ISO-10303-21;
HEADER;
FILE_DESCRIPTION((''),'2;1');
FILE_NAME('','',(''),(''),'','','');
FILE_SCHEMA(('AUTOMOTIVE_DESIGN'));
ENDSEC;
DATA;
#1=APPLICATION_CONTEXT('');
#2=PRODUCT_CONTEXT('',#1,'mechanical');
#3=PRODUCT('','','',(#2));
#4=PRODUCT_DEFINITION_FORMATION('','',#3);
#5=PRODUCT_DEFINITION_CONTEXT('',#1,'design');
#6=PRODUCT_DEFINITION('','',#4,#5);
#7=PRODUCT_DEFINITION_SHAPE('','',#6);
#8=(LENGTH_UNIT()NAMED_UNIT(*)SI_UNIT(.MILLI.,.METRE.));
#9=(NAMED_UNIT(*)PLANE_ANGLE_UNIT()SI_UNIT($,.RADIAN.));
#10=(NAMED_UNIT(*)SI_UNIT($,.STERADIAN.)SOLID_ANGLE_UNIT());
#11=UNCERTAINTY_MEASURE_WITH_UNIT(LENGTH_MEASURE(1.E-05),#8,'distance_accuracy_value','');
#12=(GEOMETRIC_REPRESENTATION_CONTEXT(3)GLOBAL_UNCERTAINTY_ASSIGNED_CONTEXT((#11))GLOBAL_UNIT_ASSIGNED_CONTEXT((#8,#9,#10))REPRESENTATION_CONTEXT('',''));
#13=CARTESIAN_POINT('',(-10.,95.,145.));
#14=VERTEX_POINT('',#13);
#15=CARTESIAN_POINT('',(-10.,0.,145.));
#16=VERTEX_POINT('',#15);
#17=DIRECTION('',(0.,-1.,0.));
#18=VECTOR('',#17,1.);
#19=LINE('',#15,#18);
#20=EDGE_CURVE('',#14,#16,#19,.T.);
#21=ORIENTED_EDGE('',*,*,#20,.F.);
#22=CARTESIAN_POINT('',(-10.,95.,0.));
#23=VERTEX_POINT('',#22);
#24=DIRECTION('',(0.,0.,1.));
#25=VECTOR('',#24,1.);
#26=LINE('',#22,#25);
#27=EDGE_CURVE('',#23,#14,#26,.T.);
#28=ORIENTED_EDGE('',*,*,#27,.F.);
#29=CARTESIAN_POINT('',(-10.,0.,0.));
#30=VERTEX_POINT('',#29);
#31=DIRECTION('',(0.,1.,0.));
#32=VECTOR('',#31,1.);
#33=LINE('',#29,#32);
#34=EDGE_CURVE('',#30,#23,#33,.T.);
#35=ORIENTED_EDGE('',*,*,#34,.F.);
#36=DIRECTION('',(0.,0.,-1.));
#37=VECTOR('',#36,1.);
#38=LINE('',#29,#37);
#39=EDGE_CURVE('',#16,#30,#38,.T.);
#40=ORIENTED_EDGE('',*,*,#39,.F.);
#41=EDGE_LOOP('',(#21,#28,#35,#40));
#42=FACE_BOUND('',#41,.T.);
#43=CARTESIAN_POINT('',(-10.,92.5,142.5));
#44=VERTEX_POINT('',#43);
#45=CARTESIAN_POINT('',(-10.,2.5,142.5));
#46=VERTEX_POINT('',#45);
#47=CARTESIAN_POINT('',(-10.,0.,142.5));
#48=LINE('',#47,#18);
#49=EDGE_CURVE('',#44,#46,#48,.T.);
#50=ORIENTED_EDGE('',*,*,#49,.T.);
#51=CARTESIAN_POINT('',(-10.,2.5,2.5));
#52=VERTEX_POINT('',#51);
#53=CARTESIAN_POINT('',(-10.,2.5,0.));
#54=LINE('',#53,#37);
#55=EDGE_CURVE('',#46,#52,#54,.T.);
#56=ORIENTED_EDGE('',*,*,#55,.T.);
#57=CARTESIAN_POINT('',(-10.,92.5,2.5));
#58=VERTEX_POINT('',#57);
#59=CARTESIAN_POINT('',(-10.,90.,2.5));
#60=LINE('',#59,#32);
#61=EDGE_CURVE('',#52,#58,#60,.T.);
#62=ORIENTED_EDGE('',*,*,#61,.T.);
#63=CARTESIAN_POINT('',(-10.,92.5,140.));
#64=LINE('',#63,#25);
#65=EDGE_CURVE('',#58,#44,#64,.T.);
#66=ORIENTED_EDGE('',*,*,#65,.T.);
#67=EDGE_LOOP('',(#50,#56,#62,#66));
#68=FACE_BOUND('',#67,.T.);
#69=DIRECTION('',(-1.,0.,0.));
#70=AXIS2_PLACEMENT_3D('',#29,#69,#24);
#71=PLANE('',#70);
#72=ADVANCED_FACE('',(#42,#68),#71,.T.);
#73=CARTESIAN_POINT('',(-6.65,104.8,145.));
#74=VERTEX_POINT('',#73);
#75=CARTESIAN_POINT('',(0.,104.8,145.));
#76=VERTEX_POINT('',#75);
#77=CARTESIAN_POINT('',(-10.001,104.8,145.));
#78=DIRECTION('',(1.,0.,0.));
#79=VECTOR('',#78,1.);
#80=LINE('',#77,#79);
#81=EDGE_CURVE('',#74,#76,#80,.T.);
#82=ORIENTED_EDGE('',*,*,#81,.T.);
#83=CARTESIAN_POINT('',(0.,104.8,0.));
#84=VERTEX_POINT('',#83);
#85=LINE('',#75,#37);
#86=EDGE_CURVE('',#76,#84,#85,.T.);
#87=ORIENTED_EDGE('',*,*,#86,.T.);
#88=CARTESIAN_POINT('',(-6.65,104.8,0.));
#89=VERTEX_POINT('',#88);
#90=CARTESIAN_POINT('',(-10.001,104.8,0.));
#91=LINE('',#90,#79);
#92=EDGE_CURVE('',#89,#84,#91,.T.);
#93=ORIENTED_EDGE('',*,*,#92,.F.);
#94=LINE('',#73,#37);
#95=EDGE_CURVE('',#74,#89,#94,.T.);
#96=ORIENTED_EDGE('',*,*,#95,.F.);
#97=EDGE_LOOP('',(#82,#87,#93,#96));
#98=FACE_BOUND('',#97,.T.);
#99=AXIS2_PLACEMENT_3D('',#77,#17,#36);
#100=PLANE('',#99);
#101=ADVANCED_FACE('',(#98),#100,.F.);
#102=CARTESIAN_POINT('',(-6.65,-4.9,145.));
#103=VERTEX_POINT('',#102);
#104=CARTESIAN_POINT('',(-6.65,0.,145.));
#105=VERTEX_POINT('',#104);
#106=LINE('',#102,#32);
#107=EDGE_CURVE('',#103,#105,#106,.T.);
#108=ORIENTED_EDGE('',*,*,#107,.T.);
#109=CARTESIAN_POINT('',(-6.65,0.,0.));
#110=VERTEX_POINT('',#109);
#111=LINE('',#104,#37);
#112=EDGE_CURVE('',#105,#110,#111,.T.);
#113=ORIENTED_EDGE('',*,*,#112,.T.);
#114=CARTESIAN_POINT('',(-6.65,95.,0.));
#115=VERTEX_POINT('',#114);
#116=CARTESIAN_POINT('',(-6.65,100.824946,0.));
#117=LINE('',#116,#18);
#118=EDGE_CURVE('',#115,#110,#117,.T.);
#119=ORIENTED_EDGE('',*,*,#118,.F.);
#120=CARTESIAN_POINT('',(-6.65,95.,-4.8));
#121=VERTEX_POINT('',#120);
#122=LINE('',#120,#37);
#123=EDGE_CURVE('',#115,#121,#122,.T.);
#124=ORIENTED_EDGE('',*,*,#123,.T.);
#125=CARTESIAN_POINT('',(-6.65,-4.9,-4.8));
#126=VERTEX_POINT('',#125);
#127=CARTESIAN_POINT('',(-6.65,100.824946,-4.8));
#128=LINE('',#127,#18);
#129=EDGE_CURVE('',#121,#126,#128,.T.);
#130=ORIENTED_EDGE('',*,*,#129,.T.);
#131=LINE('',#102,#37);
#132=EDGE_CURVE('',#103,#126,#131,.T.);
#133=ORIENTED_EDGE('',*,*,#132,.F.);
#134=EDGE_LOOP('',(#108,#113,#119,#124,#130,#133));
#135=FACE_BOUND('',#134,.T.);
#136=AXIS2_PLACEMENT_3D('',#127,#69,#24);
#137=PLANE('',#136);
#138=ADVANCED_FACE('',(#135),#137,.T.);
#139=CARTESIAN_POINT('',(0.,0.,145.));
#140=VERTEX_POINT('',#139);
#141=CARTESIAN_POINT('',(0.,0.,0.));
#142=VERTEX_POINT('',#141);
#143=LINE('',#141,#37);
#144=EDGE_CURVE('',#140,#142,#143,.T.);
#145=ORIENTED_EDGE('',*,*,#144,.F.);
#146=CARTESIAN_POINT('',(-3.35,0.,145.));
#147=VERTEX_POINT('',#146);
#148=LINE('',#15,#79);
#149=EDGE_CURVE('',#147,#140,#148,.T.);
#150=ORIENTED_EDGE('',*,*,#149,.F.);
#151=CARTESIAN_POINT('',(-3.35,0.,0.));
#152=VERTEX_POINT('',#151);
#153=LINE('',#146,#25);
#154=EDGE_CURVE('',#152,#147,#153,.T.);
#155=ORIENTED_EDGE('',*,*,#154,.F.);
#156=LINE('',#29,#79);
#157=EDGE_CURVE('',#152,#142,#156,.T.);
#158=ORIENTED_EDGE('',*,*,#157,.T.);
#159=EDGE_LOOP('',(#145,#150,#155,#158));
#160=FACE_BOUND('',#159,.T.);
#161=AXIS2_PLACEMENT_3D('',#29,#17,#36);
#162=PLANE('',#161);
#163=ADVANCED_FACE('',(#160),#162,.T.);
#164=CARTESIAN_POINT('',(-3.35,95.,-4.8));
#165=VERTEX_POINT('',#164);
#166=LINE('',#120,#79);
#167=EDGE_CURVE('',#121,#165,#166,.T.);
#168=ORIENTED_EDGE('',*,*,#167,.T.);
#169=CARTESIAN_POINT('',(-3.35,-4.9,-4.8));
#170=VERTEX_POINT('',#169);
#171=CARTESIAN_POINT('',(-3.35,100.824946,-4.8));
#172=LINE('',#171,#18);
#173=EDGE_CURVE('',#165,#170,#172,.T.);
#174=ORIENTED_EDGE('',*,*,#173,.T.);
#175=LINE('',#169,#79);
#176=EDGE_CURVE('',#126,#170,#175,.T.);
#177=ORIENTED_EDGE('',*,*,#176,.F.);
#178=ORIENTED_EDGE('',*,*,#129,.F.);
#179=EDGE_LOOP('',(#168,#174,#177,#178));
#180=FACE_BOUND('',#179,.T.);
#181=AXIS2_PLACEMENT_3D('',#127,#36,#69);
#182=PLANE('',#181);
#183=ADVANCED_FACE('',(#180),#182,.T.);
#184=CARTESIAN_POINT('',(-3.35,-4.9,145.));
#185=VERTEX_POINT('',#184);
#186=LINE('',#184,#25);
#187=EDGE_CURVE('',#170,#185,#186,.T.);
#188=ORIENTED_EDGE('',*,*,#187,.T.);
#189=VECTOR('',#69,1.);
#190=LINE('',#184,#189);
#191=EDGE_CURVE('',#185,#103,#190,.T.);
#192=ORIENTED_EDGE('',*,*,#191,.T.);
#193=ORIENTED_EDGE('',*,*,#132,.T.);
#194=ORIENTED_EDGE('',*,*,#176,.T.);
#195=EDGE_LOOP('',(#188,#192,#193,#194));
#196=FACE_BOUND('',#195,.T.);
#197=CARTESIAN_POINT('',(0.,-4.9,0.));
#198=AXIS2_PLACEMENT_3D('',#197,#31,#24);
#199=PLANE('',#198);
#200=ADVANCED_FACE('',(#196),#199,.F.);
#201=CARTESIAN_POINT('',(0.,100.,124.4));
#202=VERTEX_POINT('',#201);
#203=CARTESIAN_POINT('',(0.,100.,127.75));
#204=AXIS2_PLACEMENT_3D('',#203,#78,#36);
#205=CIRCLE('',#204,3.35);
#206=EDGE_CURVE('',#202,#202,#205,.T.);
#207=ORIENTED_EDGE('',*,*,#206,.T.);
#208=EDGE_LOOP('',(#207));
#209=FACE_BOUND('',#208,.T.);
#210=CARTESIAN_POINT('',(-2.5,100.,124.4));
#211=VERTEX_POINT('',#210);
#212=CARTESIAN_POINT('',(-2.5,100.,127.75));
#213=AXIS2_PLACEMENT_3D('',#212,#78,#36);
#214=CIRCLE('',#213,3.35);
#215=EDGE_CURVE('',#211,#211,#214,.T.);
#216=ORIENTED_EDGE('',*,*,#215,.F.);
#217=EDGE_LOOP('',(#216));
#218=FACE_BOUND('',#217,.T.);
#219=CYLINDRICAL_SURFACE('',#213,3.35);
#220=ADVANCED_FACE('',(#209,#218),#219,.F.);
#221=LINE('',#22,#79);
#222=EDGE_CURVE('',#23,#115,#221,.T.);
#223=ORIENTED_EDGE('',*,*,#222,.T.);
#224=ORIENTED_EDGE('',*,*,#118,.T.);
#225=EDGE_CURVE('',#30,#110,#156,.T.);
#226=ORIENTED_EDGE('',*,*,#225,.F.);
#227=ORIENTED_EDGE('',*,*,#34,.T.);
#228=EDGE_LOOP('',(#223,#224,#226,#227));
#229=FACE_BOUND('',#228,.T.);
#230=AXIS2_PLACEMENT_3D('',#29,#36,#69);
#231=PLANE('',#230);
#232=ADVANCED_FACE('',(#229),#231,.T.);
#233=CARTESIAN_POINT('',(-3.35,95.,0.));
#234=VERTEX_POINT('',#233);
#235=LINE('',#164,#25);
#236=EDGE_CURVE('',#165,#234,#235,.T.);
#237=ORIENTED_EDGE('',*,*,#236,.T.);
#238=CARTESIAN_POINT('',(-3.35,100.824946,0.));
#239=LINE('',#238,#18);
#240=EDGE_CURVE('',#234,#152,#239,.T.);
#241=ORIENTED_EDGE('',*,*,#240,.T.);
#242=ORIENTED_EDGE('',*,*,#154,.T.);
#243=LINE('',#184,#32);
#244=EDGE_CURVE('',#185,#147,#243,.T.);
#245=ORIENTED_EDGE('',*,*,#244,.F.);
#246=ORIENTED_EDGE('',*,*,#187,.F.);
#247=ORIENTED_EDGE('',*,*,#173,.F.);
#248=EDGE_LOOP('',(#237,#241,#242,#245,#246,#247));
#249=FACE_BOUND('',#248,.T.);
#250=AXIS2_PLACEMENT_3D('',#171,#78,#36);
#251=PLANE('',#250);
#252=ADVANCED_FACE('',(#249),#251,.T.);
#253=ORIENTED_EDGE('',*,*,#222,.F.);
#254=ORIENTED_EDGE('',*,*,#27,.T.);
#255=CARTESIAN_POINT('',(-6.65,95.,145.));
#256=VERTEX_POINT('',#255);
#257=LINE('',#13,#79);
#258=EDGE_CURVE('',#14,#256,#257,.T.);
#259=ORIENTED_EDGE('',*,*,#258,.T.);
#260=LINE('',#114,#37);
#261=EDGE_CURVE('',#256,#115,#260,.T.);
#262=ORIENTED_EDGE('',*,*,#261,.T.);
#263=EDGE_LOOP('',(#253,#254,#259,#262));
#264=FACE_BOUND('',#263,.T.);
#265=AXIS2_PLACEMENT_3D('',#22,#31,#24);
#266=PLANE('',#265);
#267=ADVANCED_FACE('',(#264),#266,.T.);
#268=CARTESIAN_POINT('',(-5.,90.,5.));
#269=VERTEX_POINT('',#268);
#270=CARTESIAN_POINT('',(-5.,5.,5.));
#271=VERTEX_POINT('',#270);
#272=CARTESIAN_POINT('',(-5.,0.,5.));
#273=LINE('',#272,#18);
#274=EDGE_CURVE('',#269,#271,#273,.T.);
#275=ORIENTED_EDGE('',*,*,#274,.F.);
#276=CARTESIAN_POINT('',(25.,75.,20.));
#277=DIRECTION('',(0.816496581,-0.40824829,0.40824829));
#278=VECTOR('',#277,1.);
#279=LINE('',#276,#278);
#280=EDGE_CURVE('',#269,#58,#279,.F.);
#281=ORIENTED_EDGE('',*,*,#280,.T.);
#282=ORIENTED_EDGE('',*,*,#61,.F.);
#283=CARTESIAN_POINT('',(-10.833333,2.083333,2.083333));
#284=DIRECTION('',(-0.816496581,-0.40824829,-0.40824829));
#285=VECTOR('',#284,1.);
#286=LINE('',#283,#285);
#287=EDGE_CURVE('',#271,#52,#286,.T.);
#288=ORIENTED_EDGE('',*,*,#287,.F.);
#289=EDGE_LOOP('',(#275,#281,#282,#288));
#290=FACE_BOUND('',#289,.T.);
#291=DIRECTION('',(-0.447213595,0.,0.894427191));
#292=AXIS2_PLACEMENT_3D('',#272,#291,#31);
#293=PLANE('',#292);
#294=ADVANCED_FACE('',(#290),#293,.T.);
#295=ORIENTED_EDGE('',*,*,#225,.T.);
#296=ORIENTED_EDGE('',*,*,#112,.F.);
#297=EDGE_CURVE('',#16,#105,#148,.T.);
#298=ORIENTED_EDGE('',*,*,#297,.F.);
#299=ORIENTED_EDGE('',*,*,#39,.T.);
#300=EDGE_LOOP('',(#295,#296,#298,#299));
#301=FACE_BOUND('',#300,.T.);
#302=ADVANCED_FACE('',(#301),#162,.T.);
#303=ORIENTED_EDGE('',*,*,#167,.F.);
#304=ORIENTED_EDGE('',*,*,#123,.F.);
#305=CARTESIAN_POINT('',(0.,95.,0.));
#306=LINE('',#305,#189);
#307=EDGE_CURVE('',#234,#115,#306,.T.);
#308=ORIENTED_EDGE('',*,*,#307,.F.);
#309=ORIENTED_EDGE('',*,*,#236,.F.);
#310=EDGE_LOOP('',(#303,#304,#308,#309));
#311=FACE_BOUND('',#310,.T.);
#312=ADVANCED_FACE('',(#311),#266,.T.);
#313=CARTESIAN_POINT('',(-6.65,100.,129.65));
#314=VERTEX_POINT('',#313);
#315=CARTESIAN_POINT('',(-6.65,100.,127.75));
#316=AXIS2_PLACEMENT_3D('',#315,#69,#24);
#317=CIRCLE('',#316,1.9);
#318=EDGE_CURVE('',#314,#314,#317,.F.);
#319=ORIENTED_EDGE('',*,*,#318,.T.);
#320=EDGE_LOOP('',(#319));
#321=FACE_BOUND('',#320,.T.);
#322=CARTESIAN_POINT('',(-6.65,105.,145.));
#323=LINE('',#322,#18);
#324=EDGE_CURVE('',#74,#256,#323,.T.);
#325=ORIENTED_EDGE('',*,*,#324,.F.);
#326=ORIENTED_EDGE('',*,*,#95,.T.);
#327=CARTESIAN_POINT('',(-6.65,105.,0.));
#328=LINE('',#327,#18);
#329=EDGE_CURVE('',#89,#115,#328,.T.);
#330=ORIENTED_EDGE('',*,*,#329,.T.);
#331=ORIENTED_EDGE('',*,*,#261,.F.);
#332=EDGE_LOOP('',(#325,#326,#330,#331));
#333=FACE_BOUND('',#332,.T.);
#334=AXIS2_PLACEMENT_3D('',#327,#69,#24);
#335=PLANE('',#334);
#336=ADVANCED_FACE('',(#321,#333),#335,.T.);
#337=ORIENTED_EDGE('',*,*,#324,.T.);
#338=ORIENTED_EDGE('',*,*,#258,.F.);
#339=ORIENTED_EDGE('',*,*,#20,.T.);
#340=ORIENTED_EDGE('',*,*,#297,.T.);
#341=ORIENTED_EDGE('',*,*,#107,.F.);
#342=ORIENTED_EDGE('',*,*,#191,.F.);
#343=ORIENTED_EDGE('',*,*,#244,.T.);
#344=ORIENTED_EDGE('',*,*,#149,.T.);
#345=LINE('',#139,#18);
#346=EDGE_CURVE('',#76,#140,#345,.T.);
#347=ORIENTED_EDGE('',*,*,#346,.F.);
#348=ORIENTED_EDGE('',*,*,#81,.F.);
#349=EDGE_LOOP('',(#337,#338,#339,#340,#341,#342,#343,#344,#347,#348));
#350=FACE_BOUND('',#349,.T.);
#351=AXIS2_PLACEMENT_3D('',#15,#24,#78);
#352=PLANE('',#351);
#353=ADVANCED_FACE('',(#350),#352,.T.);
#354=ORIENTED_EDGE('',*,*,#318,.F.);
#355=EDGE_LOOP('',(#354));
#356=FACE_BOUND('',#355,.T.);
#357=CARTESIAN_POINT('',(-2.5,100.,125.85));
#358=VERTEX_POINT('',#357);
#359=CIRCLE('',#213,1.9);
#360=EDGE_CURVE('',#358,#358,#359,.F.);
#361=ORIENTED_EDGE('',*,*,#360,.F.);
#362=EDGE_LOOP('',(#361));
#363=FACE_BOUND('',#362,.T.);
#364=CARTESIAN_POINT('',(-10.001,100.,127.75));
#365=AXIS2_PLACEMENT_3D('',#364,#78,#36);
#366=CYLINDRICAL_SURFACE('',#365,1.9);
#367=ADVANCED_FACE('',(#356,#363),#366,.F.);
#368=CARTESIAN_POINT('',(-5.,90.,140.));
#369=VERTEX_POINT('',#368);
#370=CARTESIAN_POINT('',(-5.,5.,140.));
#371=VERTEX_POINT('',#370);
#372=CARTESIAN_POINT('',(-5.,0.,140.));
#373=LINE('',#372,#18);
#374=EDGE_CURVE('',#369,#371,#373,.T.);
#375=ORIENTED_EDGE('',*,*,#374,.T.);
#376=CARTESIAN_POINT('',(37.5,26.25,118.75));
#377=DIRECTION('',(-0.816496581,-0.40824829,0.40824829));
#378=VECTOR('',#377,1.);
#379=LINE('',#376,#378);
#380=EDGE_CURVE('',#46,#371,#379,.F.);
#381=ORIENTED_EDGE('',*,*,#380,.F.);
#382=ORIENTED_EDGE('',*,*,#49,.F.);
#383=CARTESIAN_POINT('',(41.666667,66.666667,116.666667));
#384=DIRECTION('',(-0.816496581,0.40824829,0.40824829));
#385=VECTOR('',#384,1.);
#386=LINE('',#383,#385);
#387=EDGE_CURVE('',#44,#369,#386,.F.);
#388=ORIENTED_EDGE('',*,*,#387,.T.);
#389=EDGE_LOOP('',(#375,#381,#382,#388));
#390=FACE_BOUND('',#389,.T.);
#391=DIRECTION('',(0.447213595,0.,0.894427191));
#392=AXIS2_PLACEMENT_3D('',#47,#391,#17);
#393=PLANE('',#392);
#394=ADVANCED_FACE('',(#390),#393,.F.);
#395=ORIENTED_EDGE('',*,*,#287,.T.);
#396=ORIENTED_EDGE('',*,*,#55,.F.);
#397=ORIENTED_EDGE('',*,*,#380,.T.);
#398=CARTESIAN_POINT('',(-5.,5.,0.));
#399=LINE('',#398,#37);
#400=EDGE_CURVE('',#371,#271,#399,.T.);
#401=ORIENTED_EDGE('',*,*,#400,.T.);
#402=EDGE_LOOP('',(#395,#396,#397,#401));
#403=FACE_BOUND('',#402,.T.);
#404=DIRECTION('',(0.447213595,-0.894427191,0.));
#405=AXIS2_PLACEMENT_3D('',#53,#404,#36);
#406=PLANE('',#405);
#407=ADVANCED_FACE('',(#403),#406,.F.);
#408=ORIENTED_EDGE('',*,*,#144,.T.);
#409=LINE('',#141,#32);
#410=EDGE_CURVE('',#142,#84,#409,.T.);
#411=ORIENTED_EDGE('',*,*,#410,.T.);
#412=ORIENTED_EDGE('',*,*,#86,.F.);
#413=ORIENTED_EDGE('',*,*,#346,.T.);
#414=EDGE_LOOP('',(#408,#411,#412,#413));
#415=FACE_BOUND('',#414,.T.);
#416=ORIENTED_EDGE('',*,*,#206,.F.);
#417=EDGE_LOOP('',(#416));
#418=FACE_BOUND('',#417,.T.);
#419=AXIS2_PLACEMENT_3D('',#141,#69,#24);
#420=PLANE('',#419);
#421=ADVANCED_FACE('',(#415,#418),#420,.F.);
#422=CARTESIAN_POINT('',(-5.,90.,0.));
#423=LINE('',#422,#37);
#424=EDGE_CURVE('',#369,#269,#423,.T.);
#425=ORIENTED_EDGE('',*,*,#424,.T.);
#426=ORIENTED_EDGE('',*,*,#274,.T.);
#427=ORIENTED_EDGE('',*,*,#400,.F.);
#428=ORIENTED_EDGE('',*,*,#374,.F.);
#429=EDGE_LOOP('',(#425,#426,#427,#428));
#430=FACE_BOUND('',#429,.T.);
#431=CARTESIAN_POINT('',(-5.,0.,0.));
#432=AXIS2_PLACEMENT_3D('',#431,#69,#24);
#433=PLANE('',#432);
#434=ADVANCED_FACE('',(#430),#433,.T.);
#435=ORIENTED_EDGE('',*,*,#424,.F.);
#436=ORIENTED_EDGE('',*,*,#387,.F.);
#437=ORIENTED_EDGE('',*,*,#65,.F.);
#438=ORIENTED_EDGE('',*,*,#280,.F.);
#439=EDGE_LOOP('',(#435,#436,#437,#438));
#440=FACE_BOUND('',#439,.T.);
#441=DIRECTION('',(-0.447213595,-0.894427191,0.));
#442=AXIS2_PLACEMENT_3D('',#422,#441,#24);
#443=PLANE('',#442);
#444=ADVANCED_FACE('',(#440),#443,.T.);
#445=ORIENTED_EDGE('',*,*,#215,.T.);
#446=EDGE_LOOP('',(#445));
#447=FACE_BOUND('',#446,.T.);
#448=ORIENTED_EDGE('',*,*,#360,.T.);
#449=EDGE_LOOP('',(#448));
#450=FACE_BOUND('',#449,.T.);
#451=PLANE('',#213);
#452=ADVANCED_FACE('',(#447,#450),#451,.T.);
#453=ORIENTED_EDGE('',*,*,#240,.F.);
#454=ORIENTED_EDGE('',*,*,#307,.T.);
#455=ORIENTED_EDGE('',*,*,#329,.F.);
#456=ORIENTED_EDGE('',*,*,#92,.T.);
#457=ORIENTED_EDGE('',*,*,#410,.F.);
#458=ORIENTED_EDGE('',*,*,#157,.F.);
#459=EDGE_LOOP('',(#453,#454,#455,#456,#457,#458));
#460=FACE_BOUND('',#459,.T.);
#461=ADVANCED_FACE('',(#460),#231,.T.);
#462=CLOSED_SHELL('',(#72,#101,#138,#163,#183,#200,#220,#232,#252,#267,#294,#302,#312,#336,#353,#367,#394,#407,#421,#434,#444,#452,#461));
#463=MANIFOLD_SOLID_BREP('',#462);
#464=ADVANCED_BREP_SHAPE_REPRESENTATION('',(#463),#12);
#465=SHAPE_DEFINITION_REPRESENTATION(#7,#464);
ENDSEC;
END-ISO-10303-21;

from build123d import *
from OCP.BRepFilletAPI import BRepFilletAPI_MakeChamfer

# Parameters (mm, degrees)
SKETCH1_W           = 95
SKETCH1_H           = 145
BOSS_EXTRUDE1_DEPTH = 10
SKETCH2_W           = 3.3
SKETCH2_H           = 4.8
BOSS_EXTRUDE2_DEPTH = 95
SKETCH3_W           = 3.3
SKETCH3_H           = 149.8
BOSS_EXTRUDE3_DEPTH = 4.9
BOSS_EXTRUDE4_DEPTH = 10
CUT_EXTRUDE1_REACH  = 181.304
SKETCH5_R           = 1.9
SKETCH6_R           = 3.35
CUT_EXTRUDE2_DEPTH  = 2.5
CUT_EXTRUDE3_REACH  = 181.304
SKETCH7_W           = 0.2
SKETCH7_H           = 145
SKETCH8_W           = 85
SKETCH8_H           = 135
CUT_EXTRUDE4_DEPTH  = 5
CHAMFER1_SIZE       = 2.5
CHAMFER1_SIZE_2     = 5


with BuildPart() as part:
    # Sketch1 → Boss-Extrude1 (new body)
    with BuildSketch(Plane.YZ):
        with Locations((47.5, 72.5)):
            Rectangle(SKETCH1_W, SKETCH1_H)
    extrude(amount=-BOSS_EXTRUDE1_DEPTH)

    # Sketch2 → Boss-Extrude2 (add)
    with BuildSketch(Plane.XZ):
        with Locations((-5, -2.4)):
            Rectangle(SKETCH2_W, SKETCH2_H)
    extrude(amount=-BOSS_EXTRUDE2_DEPTH)

    # Sketch3 → Boss-Extrude3 (add)
    with BuildSketch(Plane.XZ):
        with Locations((-5, 70.1)):
            Rectangle(SKETCH3_W, SKETCH3_H)
    extrude(amount=BOSS_EXTRUDE3_DEPTH)

    # Sketch4 → Boss-Extrude4 (add)
    with BuildSketch(Plane(origin=(0, 95, 0), x_dir=(-1, 0, 0), z_dir=(0, 1, 0))):
        Polygon((6.65, 145), (0, 145), (0, 0), (3.35, 0), (6.65, 0), align=None)
    extrude(amount=BOSS_EXTRUDE4_DEPTH)

    # Sketch5 → Cut-Extrude1 (cut, up to next)
    with BuildSketch(Plane.YZ, mode=Mode.PRIVATE) as cut_extrude1_sk1:
        with Locations(Location((100, 127.75, 0), (0, 0, 270))):
            Circle(SKETCH5_R)
    cut_extrude1_tool1 = extrude(cut_extrude1_sk1.sketch, amount=-CUT_EXTRUDE1_REACH, mode=Mode.PRIVATE) & part.part
    add(cut_extrude1_tool1.solids().sort_by_distance((0, 100, 127.75))[0], mode=Mode.SUBTRACT)

    # Sketch6 → Cut-Extrude2 (cut)
    with BuildSketch(Plane.YZ):
        with Locations(Location((100, 127.75, 0), (0, 0, 270))):
            Circle(SKETCH6_R)
    extrude(amount=-CUT_EXTRUDE2_DEPTH, mode=Mode.SUBTRACT)

    # Sketch7 → Cut-Extrude3 (cut, up to next)
    with BuildSketch(Plane.YZ, mode=Mode.PRIVATE) as cut_extrude3_sk1:
        with Locations((104.9, 72.5)):
            Rectangle(SKETCH7_W, SKETCH7_H)
    cut_extrude3_tool1 = extrude(cut_extrude3_sk1.sketch, amount=-CUT_EXTRUDE3_REACH, mode=Mode.PRIVATE) & part.part
    add(cut_extrude3_tool1.solids().sort_by_distance((0, 104.9, 72.5))[0], mode=Mode.SUBTRACT)

    # Sketch8 → Cut-Extrude4 (cut)
    with BuildSketch(Plane(origin=(-10, 0, 0), x_dir=(0, -1, 0), z_dir=(-1, 0, 0))):
        with Locations((-47.5, 72.5)):
            Rectangle(SKETCH8_W, SKETCH8_H)
    extrude(amount=-CUT_EXTRUDE4_DEPTH, mode=Mode.SUBTRACT)

    # Chamfer1
    chamfer1_edges_1 = [part.edges().sort_by_distance(p)[0] for p in [
        (-10, 5, 72.5),
    ]]
    chamfer1_side_1 = [part.faces().sort_by_distance(p)[0] for p in [
        (-10, 4.95, 72.5),
    ]]
    chamfer1_edges_2 = [part.edges().sort_by_distance(p)[0] for p in [
        (-10, 47.5, 5),
    ]]
    chamfer1_side_2 = [part.faces().sort_by_distance(p)[0] for p in [
        (-10, 47.5, 4.95),
    ]]
    chamfer1_edges_3 = [part.edges().sort_by_distance(p)[0] for p in [
        (-10, 90, 72.5),
    ]]
    chamfer1_side_3 = [part.faces().sort_by_distance(p)[0] for p in [
        (-10, 90.05, 72.5),
    ]]
    chamfer1_edges_4 = [part.edges().sort_by_distance(p)[0] for p in [
        (-10, 47.5, 140),
    ]]
    chamfer1_side_4 = [part.faces().sort_by_distance(p)[0] for p in [
        (-10, 47.5, 140.05),
    ]]
    chamfer1 = BRepFilletAPI_MakeChamfer(part.part.solid().wrapped)
    for e in chamfer1_edges_1:
        chamfer1.Add(CHAMFER1_SIZE - 0.0001, CHAMFER1_SIZE_2 - 0.0001, e.wrapped, chamfer1_side_1[0].wrapped)
    for e in chamfer1_edges_2:
        chamfer1.Add(CHAMFER1_SIZE - 0.0001, CHAMFER1_SIZE_2 - 0.0001, e.wrapped, chamfer1_side_2[0].wrapped)
    for e in chamfer1_edges_3:
        chamfer1.Add(CHAMFER1_SIZE - 0.0001, CHAMFER1_SIZE_2 - 0.0001, e.wrapped, chamfer1_side_3[0].wrapped)
    for e in chamfer1_edges_4:
        chamfer1.Add(CHAMFER1_SIZE - 0.0001, CHAMFER1_SIZE_2 - 0.0001, e.wrapped, chamfer1_side_4[0].wrapped)
    add(Compound.cast(chamfer1.Shape()), mode=Mode.REPLACE)  # a hair under: the kernel refuses the full size


solid = part.part
